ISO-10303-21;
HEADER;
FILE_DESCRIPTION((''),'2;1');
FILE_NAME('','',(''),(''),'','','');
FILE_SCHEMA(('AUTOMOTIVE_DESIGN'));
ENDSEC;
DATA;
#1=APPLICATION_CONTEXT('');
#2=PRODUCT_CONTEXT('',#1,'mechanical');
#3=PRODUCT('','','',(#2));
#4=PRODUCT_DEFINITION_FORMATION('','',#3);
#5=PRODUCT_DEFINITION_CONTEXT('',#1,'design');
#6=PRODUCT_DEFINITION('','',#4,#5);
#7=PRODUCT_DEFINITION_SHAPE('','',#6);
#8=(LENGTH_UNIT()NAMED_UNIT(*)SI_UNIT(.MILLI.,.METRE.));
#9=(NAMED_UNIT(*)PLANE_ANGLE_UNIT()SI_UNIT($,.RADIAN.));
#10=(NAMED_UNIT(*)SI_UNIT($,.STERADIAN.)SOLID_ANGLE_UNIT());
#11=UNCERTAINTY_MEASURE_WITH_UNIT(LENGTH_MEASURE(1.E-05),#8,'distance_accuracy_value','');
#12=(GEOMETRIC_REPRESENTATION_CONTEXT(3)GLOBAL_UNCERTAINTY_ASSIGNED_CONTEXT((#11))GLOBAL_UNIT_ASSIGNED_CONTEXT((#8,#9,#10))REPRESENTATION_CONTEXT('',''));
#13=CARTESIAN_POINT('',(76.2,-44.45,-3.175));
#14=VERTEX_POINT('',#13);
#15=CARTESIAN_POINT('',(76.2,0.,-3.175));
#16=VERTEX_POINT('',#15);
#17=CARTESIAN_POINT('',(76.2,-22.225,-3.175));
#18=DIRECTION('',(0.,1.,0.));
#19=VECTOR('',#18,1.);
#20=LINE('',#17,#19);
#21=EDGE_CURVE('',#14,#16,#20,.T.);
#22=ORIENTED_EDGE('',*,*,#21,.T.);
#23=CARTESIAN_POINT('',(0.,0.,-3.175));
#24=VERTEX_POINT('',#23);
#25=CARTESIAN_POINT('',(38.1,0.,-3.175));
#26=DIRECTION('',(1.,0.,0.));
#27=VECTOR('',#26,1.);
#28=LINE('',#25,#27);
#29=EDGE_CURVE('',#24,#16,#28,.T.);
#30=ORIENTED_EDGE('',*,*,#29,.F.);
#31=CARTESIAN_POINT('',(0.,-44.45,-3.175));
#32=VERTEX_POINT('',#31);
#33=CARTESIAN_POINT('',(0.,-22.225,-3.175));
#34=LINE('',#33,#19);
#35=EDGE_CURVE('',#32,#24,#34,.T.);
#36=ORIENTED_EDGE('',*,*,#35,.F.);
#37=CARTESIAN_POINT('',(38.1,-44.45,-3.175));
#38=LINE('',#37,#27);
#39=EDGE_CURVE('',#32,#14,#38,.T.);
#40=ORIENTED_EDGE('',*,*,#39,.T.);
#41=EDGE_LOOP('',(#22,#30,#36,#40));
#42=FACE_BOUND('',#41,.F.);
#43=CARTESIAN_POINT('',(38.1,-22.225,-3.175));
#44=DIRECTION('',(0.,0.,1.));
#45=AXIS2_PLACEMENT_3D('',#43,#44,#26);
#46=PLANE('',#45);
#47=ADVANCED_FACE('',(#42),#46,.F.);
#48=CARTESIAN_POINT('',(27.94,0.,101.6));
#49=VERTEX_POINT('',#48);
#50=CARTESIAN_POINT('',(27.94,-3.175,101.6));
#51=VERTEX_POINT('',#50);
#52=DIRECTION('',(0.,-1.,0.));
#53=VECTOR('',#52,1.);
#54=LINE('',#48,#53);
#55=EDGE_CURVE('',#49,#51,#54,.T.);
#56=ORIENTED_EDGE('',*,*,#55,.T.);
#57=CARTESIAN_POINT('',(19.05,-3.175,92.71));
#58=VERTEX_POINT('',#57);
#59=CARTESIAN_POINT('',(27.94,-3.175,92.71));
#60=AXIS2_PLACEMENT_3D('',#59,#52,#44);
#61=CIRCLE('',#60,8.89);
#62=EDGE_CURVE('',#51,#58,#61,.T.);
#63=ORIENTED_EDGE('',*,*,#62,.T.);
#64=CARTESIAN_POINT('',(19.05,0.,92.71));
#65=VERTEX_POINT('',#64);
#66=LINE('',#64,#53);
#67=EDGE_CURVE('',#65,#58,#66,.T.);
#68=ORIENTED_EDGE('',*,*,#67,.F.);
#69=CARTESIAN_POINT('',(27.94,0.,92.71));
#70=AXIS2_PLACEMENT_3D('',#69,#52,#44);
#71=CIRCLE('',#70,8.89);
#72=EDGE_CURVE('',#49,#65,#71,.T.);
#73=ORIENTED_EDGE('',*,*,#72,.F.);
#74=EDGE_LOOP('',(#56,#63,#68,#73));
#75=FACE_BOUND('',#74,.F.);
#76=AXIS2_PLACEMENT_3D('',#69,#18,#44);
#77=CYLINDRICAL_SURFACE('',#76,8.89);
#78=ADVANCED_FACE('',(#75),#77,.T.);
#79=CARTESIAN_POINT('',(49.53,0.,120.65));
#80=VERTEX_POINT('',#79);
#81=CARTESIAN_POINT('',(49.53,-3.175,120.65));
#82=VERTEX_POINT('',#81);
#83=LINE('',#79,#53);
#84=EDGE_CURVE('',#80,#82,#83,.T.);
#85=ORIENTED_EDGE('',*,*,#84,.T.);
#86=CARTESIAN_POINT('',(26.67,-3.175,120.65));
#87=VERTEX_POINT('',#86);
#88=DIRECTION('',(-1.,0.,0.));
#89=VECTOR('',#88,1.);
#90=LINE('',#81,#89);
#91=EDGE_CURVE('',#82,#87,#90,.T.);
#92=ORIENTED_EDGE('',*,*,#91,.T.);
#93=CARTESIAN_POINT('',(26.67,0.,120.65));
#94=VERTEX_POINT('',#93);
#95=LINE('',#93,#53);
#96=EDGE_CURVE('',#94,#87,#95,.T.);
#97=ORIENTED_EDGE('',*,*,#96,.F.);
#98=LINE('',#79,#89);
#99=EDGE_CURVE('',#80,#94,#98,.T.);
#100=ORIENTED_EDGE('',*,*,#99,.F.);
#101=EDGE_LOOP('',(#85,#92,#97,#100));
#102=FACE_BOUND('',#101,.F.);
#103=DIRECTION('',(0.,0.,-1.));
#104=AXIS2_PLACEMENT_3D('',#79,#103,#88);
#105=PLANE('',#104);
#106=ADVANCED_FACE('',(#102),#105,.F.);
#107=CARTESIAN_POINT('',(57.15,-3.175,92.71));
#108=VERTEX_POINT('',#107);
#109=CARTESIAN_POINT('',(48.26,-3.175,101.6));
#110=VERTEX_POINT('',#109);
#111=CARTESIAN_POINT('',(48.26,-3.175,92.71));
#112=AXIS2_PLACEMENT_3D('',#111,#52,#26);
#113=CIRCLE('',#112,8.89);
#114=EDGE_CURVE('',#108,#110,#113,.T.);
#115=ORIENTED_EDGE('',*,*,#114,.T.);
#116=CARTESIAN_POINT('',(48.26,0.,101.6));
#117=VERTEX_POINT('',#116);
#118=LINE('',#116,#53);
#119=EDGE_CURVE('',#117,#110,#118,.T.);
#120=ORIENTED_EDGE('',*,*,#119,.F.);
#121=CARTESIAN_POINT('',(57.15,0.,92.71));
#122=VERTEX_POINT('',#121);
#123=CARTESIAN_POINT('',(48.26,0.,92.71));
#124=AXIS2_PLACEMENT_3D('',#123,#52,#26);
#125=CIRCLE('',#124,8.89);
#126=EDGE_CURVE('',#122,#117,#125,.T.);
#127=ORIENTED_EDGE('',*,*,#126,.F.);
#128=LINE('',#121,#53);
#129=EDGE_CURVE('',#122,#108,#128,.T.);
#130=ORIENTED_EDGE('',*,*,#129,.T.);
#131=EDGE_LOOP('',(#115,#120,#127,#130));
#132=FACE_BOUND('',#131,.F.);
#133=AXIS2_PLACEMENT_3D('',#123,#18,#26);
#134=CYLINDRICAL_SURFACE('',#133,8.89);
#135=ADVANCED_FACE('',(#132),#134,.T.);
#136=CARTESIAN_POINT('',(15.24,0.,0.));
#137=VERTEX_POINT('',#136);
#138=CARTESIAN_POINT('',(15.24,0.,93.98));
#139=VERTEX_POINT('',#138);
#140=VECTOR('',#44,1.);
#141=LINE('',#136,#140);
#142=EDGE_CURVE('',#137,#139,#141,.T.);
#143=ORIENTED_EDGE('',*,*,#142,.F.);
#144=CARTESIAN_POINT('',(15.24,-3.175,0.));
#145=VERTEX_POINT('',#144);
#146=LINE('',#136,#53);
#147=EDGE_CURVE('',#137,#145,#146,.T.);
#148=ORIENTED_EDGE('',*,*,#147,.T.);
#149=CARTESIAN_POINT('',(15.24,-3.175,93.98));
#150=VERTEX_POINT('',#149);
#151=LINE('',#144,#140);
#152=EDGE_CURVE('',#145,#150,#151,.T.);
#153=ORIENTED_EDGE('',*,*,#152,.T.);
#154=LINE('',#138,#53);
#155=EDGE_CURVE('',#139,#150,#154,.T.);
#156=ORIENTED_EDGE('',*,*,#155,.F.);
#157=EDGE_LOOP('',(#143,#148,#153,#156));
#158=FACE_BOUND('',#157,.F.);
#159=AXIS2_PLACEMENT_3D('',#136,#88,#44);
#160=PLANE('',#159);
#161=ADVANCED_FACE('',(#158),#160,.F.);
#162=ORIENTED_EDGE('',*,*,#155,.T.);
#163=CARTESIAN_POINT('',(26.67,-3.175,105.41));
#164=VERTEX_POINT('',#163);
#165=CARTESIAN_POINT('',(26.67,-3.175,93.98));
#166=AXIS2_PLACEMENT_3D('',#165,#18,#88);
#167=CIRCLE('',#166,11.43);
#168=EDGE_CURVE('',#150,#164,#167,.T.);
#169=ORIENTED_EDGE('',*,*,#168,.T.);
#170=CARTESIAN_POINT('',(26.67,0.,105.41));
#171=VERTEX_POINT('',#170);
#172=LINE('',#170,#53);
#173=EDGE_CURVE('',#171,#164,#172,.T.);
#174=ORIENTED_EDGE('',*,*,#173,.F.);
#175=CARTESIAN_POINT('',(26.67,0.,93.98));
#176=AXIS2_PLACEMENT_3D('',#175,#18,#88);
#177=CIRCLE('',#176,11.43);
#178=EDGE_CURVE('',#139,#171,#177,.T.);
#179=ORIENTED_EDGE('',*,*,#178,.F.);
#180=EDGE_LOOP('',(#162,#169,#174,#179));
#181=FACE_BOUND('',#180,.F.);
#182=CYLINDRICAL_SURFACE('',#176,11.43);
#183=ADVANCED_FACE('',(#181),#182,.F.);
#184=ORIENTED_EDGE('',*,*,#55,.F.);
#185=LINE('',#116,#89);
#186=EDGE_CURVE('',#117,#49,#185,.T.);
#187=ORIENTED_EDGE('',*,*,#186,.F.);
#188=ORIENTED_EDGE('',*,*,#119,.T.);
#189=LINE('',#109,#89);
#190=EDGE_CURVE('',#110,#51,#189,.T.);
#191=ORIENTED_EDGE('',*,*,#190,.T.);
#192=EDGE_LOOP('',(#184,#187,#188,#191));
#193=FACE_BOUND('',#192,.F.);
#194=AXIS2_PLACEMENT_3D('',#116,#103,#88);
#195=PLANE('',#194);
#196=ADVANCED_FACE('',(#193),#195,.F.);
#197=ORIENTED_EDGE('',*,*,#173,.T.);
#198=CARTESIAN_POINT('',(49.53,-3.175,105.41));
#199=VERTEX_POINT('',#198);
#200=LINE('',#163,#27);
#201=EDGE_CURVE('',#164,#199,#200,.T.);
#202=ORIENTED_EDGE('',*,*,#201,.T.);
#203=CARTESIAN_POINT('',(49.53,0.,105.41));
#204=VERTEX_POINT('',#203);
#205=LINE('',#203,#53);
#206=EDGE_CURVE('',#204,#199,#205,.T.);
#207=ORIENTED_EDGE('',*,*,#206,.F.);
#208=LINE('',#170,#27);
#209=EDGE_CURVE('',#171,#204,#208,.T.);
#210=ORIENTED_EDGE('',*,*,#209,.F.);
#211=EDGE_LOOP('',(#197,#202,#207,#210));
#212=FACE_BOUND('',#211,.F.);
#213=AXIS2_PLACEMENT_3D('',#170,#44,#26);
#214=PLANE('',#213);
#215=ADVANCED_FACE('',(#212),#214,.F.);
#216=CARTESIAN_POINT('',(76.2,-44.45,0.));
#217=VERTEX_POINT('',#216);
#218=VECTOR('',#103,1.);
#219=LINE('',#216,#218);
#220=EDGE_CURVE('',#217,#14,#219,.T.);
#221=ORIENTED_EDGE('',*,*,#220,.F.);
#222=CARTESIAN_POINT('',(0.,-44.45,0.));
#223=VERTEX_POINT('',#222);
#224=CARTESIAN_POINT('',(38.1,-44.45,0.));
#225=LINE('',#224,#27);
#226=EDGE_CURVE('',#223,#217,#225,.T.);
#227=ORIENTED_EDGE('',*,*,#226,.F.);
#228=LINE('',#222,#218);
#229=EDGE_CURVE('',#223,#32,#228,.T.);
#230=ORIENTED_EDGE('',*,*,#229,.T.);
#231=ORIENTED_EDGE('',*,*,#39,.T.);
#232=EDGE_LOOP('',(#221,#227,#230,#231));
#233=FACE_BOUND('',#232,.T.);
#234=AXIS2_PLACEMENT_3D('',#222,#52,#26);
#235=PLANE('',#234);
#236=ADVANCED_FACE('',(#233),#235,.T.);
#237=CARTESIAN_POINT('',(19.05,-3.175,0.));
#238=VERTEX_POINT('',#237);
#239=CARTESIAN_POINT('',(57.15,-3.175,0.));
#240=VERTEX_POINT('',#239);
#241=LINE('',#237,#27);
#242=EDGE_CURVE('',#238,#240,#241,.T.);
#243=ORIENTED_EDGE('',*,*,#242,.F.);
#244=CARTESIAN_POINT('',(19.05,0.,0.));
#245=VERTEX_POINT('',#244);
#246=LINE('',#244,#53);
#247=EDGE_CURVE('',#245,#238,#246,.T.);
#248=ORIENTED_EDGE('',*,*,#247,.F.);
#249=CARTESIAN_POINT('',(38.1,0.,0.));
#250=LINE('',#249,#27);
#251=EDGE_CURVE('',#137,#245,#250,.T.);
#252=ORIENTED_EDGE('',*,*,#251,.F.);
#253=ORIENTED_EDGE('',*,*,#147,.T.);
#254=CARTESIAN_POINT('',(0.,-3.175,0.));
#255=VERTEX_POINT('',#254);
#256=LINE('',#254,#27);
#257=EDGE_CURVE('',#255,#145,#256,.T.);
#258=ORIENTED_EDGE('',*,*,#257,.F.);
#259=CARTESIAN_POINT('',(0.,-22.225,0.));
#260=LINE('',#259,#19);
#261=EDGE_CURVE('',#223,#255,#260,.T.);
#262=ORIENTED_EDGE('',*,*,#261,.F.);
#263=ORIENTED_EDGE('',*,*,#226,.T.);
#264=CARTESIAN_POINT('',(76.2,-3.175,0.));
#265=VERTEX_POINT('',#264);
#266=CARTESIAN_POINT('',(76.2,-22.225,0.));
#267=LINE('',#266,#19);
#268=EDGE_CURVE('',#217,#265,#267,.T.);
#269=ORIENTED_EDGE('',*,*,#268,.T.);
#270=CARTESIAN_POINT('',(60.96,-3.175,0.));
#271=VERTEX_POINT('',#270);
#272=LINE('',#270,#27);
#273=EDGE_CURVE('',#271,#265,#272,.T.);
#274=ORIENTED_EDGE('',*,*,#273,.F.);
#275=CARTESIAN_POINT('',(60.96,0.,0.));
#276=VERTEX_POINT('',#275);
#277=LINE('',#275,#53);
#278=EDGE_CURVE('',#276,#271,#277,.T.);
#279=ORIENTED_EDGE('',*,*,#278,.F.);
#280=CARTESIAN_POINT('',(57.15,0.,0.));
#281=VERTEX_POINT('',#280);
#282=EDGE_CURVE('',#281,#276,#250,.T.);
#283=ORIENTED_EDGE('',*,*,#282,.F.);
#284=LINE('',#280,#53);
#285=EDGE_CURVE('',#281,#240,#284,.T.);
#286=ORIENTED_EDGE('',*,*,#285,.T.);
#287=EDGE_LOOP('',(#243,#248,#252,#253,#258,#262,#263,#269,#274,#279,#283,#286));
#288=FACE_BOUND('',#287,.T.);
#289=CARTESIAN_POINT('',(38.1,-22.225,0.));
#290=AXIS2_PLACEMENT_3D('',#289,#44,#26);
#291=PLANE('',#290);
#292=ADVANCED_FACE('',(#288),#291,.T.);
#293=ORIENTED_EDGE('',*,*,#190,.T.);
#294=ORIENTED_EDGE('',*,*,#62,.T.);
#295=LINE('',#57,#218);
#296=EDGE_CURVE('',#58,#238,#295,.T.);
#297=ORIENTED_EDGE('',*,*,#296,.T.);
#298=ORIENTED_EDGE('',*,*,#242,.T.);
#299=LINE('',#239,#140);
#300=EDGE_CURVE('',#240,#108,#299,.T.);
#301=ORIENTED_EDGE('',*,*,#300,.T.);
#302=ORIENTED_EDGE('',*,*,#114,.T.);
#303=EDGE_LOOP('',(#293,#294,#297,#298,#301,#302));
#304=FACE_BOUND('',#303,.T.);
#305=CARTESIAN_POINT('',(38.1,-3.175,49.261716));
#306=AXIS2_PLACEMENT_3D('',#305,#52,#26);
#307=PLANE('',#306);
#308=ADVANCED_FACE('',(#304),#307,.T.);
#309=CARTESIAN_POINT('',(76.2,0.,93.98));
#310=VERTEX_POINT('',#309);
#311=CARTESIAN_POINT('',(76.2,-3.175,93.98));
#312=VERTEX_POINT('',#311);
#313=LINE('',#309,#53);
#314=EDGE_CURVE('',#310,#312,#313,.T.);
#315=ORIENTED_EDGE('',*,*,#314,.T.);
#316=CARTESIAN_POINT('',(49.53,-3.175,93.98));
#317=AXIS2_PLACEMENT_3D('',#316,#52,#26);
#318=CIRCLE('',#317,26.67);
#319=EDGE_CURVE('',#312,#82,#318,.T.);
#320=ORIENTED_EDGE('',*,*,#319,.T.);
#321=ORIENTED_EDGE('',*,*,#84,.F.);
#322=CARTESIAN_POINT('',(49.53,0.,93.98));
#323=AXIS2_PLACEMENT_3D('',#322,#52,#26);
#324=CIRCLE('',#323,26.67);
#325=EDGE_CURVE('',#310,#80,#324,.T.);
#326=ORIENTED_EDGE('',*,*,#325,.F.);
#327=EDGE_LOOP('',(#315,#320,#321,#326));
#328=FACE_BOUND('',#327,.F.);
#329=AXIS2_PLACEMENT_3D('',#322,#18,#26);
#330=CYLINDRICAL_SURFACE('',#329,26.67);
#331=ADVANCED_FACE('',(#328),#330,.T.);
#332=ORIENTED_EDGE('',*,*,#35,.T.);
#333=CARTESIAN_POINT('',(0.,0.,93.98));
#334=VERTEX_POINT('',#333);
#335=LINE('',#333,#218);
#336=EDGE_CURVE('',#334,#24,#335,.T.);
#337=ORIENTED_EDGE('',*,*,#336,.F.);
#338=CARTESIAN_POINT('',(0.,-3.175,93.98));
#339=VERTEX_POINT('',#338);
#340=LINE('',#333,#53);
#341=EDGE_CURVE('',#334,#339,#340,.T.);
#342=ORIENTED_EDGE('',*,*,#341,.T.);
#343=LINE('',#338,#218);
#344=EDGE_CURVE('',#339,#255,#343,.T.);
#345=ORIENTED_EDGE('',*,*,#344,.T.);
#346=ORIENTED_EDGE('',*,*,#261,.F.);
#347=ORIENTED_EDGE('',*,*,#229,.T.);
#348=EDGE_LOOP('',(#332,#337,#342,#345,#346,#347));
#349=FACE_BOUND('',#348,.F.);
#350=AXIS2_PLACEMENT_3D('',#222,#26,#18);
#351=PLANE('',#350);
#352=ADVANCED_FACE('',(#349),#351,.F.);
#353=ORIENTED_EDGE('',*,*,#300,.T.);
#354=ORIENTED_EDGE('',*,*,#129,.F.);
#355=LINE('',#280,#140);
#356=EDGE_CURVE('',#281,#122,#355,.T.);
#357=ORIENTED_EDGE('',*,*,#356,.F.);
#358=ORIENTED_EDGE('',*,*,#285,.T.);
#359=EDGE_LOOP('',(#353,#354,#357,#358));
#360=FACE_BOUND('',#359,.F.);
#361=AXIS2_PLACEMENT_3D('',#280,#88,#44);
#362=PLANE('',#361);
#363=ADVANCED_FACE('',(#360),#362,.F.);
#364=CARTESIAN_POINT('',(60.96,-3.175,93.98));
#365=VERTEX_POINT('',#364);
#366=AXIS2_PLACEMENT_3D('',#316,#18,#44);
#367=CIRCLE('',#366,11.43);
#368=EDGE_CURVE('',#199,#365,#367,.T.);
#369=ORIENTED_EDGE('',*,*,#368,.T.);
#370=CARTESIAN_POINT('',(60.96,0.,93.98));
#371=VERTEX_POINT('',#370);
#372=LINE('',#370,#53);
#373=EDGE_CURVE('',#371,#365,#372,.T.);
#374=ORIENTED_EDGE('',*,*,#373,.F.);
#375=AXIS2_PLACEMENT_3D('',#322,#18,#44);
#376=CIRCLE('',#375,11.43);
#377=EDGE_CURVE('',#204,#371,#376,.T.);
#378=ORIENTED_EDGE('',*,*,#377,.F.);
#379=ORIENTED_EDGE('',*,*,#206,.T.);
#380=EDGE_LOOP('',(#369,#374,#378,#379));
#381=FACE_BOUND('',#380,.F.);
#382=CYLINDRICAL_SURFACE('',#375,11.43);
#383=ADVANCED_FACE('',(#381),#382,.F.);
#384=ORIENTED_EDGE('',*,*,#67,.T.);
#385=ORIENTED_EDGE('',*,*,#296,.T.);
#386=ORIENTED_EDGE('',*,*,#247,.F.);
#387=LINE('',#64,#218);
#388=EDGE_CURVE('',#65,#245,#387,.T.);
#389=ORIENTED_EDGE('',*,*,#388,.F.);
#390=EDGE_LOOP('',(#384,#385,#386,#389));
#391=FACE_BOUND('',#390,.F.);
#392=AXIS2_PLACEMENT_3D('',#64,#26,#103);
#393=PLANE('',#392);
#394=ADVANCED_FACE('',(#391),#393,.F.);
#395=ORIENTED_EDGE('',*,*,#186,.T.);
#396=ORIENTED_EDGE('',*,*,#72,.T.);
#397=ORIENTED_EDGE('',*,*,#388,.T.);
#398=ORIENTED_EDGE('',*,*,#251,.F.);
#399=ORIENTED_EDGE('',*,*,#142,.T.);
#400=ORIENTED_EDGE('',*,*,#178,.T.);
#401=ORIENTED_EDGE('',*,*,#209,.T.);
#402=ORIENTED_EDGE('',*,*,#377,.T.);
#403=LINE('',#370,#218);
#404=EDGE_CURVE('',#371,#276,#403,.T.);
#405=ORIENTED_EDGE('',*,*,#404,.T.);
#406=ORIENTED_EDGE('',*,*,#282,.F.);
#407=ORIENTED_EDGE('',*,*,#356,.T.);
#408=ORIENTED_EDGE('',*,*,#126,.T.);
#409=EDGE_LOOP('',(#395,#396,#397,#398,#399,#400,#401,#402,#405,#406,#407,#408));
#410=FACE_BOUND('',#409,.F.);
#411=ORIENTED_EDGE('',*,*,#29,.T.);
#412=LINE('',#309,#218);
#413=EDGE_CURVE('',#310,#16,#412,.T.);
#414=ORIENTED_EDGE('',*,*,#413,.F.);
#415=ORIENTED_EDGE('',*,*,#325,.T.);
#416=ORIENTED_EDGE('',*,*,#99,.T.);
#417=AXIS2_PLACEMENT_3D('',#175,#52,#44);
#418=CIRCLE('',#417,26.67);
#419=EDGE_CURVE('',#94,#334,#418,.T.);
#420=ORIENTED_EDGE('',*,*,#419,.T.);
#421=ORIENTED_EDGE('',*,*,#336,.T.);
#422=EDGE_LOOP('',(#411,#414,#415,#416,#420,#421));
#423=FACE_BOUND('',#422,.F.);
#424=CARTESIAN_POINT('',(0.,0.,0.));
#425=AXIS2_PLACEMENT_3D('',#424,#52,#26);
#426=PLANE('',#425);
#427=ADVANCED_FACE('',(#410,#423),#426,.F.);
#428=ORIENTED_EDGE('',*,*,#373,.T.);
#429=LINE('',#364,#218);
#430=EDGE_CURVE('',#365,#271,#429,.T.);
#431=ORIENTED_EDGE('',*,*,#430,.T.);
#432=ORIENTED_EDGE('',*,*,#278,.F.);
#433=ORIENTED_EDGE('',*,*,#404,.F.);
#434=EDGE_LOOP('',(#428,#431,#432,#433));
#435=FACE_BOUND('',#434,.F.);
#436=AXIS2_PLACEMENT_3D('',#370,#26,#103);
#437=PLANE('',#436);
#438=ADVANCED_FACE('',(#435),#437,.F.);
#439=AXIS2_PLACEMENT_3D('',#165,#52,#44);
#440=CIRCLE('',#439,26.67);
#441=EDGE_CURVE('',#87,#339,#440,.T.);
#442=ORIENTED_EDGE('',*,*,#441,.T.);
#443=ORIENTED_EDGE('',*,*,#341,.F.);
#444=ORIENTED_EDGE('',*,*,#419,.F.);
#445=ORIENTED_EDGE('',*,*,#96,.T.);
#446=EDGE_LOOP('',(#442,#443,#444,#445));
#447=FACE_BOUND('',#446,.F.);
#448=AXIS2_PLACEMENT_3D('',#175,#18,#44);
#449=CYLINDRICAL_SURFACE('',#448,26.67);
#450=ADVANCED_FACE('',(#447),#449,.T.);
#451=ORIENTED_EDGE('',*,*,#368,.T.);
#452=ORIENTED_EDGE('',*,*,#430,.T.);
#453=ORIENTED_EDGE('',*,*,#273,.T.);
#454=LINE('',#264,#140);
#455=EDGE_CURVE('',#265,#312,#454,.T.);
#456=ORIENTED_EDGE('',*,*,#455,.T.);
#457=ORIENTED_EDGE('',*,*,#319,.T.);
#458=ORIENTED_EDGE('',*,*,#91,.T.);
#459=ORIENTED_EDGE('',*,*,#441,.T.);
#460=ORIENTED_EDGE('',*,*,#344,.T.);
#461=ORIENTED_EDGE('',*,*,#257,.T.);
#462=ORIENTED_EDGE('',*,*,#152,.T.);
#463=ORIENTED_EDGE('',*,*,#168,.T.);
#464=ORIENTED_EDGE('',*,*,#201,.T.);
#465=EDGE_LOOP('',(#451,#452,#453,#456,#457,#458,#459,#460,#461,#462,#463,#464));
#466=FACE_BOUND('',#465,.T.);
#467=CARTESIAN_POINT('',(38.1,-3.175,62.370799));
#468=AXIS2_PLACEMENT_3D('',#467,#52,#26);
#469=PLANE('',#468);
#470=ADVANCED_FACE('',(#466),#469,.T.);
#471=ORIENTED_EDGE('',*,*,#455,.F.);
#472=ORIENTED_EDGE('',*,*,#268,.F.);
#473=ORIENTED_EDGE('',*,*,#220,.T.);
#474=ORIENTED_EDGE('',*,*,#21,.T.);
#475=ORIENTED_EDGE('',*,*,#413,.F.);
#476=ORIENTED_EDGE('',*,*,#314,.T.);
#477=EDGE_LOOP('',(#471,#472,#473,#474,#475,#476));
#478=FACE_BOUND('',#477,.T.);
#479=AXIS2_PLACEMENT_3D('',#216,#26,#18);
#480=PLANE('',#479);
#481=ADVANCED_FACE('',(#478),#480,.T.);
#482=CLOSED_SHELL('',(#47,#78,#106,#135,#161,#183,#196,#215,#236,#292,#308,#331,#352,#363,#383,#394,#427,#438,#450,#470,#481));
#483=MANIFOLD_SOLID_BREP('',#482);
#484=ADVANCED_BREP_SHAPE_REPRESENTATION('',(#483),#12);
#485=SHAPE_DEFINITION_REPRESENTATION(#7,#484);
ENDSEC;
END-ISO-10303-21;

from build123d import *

# Parameters (mm, degrees)
F2_DEPTH = 3.175
F3_W     = 76.2
F3_H     = 44.45
F4_DEPTH = 3.175
F6_DEPTH = 3.175


# Not quite as in the source:
# - a variable given as a bare number and used for a length is read in inches; the dataset says mm whatever the document's units were


with BuildPart() as f2:
    # F1 (on Front) → F2 (new body)
    with BuildSketch(Plane.XZ):
        with BuildLine():
            Line((49.53, 120.65), (26.67, 120.65))
            ThreePointArc((26.67, 120.65), (7.8114621458, 112.8385378542), (0, 93.98))
            Line((0, 93.98), (0, 0))
            Line((0, 0), (15.24, 0))
            Line((15.24, 0), (15.24, 93.98))
            ThreePointArc((15.24, 93.98), (18.587769491, 102.062230509), (26.67, 105.41))
            Line((26.67, 105.41), (49.53, 105.41))
            ThreePointArc((49.53, 105.41), (57.612230509, 102.062230509), (60.96, 93.98))
            Line((60.96, 93.98), (60.96, 0))
            Line((60.96, 0), (76.2, 0))
            Line((76.2, 0), (76.2, 93.98))
            ThreePointArc((76.2, 93.98), (68.3885378542, 112.8385378542), (49.53, 120.65))
        make_face()
    extrude(amount=F2_DEPTH)

    # F3 (on Top) → F4 (join)
    with BuildSketch(Plane.XY):
        with Locations((38.1, -22.225)):
            Rectangle(F3_W, F3_H)
    extrude(amount=-F4_DEPTH)

    # F5 (on Front) → F6 (join)
    with BuildSketch(Plane.XZ):
        with BuildLine():
            Line((48.26, 101.6), (27.94, 101.6))
            ThreePointArc((27.94, 101.6), (21.6538207153, 98.9961792847), (19.05, 92.71))
            Line((19.05, 92.71), (19.05, 0))
            Line((19.05, 0), (57.15, 0))
            Line((57.15, 0), (57.15, 92.71))
            ThreePointArc((57.15, 92.71), (54.5461792847, 98.9961792847), (48.26, 101.6))
        make_face()
    extrude(amount=F6_DEPTH)


solid = f2.part
